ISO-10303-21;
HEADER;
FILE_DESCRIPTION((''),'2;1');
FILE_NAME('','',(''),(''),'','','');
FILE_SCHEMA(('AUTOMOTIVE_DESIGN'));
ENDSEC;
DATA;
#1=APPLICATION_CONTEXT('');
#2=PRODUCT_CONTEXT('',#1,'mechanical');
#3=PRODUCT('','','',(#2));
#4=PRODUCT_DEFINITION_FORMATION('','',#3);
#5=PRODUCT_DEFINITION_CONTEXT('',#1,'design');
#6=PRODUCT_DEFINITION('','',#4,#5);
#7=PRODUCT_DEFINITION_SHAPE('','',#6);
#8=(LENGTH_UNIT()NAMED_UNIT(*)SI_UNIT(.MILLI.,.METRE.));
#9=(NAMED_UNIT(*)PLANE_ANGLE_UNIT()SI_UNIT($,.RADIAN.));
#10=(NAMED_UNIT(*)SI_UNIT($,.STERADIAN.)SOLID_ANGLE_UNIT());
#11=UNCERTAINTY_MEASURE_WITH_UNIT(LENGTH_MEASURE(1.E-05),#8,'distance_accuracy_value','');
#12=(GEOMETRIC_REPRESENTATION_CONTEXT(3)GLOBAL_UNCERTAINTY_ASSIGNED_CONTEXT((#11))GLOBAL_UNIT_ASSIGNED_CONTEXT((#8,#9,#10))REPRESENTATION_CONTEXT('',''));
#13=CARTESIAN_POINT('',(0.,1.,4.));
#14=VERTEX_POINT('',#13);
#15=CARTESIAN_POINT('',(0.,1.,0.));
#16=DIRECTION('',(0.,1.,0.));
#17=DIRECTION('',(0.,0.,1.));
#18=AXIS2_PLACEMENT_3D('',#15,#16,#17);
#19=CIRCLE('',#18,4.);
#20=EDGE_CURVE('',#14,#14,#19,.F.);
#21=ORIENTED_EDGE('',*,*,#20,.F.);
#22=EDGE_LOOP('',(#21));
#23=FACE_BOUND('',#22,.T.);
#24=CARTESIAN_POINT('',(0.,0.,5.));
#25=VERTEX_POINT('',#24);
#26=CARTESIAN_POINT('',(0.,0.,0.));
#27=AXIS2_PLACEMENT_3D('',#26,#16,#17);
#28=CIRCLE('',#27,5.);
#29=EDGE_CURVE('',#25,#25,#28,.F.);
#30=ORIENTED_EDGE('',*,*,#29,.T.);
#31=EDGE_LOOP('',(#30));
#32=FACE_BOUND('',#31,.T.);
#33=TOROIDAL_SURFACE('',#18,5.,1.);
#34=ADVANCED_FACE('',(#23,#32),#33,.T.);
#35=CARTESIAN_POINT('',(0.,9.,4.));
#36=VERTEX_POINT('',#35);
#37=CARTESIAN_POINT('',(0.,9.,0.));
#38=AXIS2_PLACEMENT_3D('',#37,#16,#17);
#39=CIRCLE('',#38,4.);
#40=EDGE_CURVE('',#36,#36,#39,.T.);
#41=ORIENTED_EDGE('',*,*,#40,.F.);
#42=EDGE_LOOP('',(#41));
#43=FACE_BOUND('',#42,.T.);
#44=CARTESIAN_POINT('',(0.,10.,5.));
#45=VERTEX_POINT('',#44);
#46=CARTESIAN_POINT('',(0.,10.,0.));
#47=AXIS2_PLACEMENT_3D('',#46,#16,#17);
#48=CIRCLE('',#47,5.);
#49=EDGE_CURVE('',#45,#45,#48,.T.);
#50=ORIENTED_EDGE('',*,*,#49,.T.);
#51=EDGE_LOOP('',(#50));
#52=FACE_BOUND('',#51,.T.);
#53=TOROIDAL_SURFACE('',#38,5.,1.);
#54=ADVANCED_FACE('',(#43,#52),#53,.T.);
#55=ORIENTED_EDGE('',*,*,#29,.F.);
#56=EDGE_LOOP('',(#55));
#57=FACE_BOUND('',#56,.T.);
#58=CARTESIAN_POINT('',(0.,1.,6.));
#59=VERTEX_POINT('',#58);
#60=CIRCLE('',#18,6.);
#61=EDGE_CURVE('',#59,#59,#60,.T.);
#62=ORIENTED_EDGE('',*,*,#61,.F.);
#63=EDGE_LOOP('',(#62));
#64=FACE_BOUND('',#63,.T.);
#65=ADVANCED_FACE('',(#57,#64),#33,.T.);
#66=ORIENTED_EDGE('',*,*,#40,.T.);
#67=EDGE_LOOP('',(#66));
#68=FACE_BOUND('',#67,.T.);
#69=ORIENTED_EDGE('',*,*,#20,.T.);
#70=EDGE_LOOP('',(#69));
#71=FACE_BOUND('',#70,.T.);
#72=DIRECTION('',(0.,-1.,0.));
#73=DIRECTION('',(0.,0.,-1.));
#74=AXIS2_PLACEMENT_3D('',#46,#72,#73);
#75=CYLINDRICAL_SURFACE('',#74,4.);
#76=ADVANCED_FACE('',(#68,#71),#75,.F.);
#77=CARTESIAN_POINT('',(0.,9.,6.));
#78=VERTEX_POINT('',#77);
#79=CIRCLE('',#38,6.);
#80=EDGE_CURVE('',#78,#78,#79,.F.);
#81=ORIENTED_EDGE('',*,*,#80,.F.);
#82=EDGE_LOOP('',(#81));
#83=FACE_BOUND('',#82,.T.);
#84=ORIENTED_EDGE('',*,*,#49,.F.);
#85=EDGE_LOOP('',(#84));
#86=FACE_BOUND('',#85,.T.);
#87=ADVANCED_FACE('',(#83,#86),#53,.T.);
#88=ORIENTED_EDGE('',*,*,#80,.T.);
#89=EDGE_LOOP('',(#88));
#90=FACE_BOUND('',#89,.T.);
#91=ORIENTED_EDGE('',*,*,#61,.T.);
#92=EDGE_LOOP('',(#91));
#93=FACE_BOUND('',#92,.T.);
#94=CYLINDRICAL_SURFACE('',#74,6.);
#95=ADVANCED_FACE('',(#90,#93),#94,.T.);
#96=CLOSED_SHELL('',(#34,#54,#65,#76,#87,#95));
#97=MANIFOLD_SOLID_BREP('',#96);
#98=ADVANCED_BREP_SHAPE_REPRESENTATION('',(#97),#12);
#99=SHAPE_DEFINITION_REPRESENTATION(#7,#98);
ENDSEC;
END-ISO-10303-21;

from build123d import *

# Parameters (mm, degrees)
SKETCH_1_R      = 6
SKETCH_1_R_2    = 4
EXTRUDE_1_DEPTH = 10
FILLET_1_R      = 1


with BuildPart() as part:
    # Эскиз1 → Бобышка-Вытянуть1 (new body)
    with BuildSketch(Plane(origin=(0, 0, 0), x_dir=(1, 0, 0), z_dir=(0, 1, 0))):
        with Locations(Location((0, 0, 0), (0, 0, 270))):
            Circle(SKETCH_1_R)
        with Locations(Location((0, 0, 0), (0, 0, 270))):
            Circle(SKETCH_1_R_2, mode=Mode.SUBTRACT)
    extrude(amount=EXTRUDE_1_DEPTH)

    # 圆角1
    fillet_1_edges = [part.edges().sort_by_distance(p)[0] for p in [
        (0, 0, -6),
        (0, 10, -6),
        (0, 0, -4),
        (0, 10, -4),
    ]]
    fillet(fillet_1_edges, radius=FILLET_1_R - 0.0001)  # a hair under: the kernel refuses the full size


solid = part.part
